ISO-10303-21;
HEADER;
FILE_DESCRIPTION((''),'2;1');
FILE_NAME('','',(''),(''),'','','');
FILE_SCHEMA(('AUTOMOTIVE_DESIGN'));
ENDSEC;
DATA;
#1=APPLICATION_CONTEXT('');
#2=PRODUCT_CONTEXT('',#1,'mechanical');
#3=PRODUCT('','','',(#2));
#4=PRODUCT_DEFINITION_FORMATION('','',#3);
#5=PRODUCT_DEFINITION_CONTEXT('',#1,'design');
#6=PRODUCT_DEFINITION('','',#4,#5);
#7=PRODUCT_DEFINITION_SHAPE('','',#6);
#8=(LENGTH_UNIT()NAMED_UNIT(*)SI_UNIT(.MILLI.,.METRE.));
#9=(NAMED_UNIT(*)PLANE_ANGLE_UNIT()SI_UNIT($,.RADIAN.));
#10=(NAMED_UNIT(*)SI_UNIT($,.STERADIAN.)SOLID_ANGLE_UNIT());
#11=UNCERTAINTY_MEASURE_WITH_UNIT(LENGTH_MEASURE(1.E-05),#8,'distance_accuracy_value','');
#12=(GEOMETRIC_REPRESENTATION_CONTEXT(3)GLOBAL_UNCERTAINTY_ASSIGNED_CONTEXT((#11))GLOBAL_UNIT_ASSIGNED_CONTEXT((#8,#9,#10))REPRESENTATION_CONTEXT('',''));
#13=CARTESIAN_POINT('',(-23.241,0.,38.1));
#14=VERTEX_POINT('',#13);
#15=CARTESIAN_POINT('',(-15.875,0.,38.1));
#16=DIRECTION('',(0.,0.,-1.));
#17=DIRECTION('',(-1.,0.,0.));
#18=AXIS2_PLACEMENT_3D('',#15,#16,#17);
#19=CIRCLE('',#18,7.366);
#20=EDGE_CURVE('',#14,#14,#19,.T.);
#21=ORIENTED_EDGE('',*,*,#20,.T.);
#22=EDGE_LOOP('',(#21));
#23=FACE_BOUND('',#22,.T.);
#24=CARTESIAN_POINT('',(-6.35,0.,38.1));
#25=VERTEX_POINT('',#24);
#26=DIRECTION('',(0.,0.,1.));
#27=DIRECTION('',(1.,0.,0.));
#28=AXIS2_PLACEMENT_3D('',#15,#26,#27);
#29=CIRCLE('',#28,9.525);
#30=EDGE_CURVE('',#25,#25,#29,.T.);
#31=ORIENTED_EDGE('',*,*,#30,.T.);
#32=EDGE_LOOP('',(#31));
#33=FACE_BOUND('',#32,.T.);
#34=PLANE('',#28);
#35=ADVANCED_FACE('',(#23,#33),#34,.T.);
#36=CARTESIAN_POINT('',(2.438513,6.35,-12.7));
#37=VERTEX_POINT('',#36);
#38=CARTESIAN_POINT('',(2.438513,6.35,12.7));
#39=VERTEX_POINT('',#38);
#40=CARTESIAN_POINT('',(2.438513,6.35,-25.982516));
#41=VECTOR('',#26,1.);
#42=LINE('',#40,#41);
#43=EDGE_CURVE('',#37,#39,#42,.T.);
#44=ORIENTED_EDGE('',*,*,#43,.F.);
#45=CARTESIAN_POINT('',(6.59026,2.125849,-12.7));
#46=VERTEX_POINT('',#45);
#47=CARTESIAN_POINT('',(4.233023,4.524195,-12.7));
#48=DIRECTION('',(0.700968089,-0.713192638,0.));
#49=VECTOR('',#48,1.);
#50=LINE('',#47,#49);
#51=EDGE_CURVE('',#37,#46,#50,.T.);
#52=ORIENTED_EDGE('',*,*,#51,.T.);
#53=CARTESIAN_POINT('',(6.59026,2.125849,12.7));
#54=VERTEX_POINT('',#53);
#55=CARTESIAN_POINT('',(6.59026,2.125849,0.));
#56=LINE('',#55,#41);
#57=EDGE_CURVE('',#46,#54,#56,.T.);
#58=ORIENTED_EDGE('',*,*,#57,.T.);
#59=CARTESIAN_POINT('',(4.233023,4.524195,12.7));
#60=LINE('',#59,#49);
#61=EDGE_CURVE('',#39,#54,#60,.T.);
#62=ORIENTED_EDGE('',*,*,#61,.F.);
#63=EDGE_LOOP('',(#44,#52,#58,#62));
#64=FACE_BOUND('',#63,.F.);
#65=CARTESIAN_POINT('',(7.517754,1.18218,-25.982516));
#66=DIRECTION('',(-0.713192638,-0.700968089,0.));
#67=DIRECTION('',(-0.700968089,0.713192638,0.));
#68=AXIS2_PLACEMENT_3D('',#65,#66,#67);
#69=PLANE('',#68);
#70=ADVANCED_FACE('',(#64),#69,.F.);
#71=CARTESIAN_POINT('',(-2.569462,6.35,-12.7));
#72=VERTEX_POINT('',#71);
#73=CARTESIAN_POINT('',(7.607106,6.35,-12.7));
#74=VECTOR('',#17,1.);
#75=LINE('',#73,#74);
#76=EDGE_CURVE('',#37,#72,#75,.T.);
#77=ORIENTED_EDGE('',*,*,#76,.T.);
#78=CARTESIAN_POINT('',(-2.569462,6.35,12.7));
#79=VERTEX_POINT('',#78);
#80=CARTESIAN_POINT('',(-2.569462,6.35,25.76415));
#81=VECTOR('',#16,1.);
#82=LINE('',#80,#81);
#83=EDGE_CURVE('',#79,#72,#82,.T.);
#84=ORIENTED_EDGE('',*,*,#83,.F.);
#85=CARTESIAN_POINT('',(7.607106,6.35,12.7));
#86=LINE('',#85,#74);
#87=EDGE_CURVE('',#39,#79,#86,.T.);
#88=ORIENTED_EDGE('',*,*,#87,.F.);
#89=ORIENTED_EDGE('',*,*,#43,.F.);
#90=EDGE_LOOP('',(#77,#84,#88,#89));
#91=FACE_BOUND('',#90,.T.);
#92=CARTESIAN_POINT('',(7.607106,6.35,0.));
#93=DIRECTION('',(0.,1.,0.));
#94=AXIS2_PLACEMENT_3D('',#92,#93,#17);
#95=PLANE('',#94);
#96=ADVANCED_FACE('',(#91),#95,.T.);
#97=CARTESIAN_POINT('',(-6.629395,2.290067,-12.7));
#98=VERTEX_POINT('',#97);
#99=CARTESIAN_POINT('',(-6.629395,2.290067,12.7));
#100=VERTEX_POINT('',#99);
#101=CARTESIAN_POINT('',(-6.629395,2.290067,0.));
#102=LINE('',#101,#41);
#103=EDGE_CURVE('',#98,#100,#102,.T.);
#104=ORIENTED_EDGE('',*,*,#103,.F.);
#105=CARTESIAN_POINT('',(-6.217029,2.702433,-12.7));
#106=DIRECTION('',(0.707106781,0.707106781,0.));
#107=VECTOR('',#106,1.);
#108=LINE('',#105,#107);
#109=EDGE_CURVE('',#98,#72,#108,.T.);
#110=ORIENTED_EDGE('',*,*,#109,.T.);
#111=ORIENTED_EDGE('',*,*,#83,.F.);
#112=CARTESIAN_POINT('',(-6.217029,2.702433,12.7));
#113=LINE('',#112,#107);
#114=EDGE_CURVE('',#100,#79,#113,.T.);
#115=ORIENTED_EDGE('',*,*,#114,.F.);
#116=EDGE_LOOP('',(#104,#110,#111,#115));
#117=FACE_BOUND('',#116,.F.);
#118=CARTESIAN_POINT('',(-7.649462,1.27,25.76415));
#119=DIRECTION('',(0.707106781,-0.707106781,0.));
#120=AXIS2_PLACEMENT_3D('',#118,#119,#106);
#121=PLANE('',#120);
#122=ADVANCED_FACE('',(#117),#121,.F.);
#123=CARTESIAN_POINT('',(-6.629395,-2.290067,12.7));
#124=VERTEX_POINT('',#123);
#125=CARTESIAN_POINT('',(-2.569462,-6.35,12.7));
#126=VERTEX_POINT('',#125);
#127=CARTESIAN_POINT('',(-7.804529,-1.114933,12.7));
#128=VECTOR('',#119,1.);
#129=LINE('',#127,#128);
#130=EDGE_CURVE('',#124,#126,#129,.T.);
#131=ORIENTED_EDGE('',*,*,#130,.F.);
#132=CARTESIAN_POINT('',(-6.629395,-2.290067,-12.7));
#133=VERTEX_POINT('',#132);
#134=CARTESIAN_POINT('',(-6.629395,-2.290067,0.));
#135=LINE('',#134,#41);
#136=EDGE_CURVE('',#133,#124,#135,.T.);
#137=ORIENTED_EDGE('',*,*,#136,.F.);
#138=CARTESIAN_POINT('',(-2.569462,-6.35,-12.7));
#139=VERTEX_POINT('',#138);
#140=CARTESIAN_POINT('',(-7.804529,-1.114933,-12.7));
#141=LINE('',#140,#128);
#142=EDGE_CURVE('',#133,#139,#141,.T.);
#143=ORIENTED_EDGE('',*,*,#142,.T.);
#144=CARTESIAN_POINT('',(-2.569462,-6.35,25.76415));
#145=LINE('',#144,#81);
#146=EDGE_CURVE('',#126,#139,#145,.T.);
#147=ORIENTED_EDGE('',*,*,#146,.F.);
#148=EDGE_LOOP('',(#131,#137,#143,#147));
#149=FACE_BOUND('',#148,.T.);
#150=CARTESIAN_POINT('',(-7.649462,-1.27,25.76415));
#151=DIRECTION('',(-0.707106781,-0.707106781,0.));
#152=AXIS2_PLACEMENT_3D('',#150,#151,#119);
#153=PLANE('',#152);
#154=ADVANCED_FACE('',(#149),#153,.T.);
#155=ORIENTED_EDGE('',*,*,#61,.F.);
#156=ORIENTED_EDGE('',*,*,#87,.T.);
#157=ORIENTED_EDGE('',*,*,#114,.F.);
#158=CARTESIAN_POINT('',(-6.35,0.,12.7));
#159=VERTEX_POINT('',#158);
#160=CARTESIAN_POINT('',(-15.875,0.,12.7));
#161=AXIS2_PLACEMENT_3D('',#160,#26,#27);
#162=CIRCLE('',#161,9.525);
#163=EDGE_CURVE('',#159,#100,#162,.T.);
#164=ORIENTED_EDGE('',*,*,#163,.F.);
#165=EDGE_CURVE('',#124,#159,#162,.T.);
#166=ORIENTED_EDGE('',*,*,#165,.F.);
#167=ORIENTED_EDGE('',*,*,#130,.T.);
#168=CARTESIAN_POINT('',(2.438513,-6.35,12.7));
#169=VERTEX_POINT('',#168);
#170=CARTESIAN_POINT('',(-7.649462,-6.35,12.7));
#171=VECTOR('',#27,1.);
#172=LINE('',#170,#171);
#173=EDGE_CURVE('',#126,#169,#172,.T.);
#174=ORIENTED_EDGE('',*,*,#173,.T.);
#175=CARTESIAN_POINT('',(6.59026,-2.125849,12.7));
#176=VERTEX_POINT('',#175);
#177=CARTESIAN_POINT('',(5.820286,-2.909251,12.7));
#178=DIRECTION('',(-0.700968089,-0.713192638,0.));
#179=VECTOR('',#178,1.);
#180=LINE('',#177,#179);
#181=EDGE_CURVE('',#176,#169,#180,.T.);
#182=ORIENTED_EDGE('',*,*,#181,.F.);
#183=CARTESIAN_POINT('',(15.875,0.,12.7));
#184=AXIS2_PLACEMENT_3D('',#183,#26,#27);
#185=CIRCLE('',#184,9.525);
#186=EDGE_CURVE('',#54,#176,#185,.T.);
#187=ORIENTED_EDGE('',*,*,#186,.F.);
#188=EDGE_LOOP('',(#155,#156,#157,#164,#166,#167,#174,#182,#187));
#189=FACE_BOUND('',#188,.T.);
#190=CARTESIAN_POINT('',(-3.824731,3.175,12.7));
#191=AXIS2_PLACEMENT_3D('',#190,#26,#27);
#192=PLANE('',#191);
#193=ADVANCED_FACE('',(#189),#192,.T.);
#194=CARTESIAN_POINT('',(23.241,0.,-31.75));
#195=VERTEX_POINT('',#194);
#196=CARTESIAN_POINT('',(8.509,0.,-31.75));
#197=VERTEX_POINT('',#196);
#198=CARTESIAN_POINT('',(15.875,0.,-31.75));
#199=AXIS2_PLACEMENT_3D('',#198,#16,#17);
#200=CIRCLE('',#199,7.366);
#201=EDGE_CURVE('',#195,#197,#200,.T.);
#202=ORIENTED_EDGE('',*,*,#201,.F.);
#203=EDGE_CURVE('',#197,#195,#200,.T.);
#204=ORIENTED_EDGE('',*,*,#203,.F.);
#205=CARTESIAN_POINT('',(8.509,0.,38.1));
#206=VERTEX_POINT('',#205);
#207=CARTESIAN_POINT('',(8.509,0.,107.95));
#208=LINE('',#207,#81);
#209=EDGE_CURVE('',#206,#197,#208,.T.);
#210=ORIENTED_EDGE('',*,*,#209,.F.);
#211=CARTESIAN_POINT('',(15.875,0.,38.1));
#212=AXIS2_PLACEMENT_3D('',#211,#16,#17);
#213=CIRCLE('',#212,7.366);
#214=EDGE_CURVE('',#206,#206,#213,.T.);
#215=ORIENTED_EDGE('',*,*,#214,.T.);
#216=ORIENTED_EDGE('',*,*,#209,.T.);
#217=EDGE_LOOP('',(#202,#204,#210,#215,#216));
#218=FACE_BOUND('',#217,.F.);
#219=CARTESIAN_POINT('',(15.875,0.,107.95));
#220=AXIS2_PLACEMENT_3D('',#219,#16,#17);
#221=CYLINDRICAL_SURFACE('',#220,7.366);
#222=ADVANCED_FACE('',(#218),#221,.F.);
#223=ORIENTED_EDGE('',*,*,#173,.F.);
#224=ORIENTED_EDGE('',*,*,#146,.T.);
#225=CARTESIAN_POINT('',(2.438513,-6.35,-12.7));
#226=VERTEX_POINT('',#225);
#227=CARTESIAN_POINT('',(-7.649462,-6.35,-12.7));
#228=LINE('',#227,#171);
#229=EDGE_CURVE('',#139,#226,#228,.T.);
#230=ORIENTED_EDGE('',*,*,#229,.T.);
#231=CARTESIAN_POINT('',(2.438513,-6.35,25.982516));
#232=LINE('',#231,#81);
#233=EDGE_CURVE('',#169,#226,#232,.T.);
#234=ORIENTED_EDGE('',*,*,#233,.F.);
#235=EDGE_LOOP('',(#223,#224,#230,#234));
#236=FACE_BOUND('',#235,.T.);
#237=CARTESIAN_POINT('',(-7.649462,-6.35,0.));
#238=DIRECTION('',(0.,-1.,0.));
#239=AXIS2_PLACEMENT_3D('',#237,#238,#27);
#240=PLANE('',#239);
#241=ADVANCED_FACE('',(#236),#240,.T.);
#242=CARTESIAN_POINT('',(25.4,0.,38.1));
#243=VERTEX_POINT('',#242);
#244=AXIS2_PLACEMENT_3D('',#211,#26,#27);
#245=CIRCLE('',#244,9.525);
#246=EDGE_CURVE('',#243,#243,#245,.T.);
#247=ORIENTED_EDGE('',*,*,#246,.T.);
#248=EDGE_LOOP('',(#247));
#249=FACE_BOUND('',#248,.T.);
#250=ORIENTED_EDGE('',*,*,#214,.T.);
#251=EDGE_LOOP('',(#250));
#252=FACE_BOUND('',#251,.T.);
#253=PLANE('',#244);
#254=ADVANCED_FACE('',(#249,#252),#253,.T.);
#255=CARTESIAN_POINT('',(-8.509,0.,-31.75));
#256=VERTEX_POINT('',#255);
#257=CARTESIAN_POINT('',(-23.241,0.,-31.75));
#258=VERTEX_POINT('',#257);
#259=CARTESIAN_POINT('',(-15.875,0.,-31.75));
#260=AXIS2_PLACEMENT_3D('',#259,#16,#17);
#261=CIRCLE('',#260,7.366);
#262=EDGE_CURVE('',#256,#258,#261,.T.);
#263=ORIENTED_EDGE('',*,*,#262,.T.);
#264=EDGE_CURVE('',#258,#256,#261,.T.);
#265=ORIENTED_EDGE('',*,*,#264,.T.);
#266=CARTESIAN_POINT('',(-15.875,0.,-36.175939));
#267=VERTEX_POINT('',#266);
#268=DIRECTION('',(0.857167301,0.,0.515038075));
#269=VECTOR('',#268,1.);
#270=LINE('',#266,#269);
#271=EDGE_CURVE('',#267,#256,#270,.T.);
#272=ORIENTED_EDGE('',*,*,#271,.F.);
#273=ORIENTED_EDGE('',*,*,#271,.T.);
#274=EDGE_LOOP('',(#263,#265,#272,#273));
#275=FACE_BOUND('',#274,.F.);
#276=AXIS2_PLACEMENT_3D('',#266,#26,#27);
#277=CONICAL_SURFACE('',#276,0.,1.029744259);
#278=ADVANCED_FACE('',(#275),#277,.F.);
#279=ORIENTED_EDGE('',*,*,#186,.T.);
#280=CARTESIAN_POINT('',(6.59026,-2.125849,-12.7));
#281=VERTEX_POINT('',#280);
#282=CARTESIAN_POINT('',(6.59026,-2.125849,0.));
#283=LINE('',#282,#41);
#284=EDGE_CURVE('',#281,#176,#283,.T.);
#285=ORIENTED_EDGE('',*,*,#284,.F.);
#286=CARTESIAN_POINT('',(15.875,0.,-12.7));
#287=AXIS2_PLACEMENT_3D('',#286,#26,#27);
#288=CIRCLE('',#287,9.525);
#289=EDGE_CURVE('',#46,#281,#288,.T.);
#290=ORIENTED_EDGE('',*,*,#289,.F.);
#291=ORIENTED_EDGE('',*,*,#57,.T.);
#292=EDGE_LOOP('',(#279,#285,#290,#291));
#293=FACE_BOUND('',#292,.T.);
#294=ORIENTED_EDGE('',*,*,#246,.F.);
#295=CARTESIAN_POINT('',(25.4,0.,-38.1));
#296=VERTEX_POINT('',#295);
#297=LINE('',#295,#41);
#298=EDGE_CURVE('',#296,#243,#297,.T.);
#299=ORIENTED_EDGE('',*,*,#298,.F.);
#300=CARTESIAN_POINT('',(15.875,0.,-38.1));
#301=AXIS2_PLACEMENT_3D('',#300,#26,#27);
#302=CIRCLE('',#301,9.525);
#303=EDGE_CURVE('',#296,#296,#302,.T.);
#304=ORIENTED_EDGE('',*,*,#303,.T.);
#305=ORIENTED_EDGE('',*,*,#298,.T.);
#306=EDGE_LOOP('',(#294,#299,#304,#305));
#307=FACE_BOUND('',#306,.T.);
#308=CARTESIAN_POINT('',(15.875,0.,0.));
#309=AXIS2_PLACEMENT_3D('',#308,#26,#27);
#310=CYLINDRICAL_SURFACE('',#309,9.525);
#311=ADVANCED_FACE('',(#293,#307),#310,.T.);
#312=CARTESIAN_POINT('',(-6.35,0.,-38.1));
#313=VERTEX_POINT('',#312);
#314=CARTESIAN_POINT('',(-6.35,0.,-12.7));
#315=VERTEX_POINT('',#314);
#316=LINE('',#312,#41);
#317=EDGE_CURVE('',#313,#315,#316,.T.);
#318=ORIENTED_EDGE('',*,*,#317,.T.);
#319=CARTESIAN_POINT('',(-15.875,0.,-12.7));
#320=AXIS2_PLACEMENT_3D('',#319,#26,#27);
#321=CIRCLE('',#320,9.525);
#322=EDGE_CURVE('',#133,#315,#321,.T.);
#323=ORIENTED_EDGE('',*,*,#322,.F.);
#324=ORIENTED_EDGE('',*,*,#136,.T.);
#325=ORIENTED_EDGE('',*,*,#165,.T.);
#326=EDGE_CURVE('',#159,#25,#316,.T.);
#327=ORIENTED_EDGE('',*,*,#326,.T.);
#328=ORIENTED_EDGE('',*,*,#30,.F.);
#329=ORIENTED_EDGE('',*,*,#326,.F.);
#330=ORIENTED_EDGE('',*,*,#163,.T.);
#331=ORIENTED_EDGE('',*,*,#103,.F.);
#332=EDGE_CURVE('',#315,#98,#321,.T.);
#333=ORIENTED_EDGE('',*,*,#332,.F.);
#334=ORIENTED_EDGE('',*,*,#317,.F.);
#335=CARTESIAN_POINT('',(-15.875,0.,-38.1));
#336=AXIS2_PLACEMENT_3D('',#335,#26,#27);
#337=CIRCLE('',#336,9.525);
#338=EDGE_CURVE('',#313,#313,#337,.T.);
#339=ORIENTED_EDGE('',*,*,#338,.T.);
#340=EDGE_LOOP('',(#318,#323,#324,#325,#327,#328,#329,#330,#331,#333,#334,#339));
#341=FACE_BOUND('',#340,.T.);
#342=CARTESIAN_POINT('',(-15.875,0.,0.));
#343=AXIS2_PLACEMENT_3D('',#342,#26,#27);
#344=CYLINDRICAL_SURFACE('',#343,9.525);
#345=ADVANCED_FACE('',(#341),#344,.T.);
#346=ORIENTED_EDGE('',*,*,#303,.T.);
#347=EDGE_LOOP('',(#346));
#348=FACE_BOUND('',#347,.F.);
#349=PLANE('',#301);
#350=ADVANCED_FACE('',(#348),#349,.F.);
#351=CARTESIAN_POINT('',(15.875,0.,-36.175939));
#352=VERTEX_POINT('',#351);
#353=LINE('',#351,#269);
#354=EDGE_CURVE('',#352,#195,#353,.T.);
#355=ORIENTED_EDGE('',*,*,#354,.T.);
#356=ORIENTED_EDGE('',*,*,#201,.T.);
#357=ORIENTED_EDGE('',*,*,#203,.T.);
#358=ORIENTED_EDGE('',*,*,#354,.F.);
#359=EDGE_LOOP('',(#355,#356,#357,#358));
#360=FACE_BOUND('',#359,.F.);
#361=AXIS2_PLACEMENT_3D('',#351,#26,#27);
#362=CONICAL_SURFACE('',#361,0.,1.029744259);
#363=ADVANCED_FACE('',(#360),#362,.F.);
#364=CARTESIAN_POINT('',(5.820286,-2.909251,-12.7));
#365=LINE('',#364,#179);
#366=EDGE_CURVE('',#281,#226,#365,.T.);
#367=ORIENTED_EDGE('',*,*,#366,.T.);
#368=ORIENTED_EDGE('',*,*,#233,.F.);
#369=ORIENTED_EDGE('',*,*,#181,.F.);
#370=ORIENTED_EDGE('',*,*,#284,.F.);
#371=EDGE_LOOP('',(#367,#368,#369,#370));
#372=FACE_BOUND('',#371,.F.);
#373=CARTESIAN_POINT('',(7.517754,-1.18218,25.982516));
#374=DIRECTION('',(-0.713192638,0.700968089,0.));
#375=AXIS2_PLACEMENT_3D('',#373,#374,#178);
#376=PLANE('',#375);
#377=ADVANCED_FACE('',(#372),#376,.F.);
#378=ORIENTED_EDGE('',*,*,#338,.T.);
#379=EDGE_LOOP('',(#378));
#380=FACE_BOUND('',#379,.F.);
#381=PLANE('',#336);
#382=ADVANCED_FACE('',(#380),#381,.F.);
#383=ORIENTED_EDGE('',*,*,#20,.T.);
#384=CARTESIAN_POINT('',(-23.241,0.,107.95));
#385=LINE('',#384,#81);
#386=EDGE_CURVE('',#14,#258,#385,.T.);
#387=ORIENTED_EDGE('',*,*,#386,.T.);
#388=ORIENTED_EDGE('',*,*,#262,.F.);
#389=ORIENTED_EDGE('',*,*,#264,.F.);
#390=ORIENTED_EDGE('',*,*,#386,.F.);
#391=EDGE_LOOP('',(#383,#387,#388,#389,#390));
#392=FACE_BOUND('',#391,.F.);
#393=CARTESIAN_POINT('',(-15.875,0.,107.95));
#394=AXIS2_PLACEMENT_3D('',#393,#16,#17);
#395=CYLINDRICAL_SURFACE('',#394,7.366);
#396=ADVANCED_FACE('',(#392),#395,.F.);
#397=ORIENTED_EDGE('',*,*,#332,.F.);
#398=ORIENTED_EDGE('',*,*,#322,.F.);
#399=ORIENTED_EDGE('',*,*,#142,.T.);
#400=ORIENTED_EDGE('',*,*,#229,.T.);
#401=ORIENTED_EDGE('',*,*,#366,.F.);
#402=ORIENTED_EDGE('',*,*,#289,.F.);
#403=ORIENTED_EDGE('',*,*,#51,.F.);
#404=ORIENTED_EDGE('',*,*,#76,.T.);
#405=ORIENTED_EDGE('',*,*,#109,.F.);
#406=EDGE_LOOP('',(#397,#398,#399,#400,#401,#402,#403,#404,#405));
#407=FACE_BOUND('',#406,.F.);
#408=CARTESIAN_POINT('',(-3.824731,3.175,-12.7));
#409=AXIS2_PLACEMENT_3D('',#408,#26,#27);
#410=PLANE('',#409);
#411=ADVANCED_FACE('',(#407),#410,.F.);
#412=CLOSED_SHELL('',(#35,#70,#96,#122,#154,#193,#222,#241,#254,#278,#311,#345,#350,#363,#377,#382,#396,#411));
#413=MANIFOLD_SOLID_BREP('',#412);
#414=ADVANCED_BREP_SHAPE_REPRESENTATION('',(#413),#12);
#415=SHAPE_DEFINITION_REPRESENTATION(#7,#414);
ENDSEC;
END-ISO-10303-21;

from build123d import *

# Parameters (mm, degrees)
F0_R           = 9.525
F1_DEPTH       = 38.1
F4_W           = 7.6494621422
F4_H           = 6.35
F5_DEPTH       = 12.7
F8_D           = 14.732
F8_DEPTH       = 69.85
F8_TIP         = 4.4259393198
F8_ON_F7_D     = 14.732
F8_ON_F7_DEPTH = 69.85
F8_ON_F7_TIP   = 4.4259393198
F9_T4_DEPTH    = 51.5282991577
F9_S5_R        = 9.525
F9_T6_DEPTH    = 28
F9_T10_DEPTH   = 51.965031671
F9_S11_R       = 9.525
F9_T12_DEPTH   = 28
F9_T16_DEPTH   = 51.965031671
F9_S17_R       = 9.525
F9_T18_DEPTH   = 28
F9_T22_DEPTH   = 51.5282991577
F9_S23_R       = 9.525
F9_T24_DEPTH   = 28


# Not quite as in the source:
# - a fillet or chamfer that OpenCascade refuses, or shapes differently, is made with other operations: its cross-section is extruded or revolved along the edge and cut away or added
# - a feature of the source that left no trace in its solid (it failed there, or was rolled back) is left out


with BuildPart() as f1:
    # F0 (on Top) → F1 (new body, symmetric)
    with BuildSketch(Plane.XY):
        with Locations((-15.875, 0)):
            Circle(F0_R)
    extrude(amount=F1_DEPTH, both=True)



with BuildPart() as f1b:
    # F0 (on Top) → F1, piece 2 (new body, symmetric)
    with BuildSketch(Plane.XY):
        with Locations((15.875, 0)):
            Circle(F0_R)
    extrude(amount=F1_DEPTH, both=True)


with BuildPart() as f1_1:
    add(f1.part)

    add(f1b.part)  # F5 merges F1b
    # F4 (on Top) → F5 (join, symmetric)
    with BuildSketch(Plane.XY):
        with Locations((-3.8247310711, 3.175)):
            Rectangle(F4_W, F4_H)
        Polygon((7.4973143637, 0), (0, 0), (0, -6.35), (7.6071062533, -6.35), align=None)
        Polygon((0, 6.35), (0, 0), (7.4973143637, 0), (7.6071062533, 6.35), align=None)
        with Locations((-3.8247310711, -3.175)):
            Rectangle(F4_W, F4_H)
    extrude(amount=F5_DEPTH, both=True)

    # F8
    with Locations(Plane.XY.offset(38.1)):
        with Locations((-15.875, 0)):
            Hole(F8_D / 2, depth=F8_DEPTH)
            with Locations((0, 0, -(F8_DEPTH + F8_TIP / 2))):  # 118° drill point
                Cone(0, F8_D / 2, F8_TIP, mode=Mode.SUBTRACT)

    # F8 on F7
    with Locations(Plane.XY.offset(38.1)):
        with Locations((15.875, 0)):
            Hole(F8_ON_F7_D / 2, depth=F8_ON_F7_DEPTH)
            with Locations((0, 0, -(F8_ON_F7_DEPTH + F8_ON_F7_TIP / 2))):  # 118° drill point
                Cone(0, F8_ON_F7_D / 2, F8_ON_F7_TIP, mode=Mode.SUBTRACT)

    # F9: chamfer of 5.08 on 4 edges, made by hand


with BuildPart() as f9_tool2:
    # F9_s3 → F9_t4 (new body)
    with BuildSketch(Plane.XY.offset(25.7641495789)):
        Polygon((-7.6494621422, -1.27), (-2.5694621422, -6.35), (-7.6494621422, -6.35), align=None)
    extrude(amount=-F9_T4_DEPTH)

    # F9_s5 → F9_t6 (cut, symmetric)
    with BuildSketch(Plane.XY):
        with Locations((-15.875, 0)):
            Circle(F9_S5_R)
    extrude(amount=F9_T6_DEPTH, both=True, mode=Mode.SUBTRACT)


with BuildPart() as f1_2:
    add(f1_1.part)

    # F9_t1: cut F9_tool2
    add(f9_tool2.part, mode=Mode.SUBTRACT)


with BuildPart() as f9_tool8:
    # F9_s9 → F9_t10 (new body)
    with BuildSketch(Plane.XY.offset(25.9825158355)):
        Polygon((7.5177543218, -1.1821796141), (2.438513475, -6.35), (7.6071062533, -6.35), align=None)
    extrude(amount=-F9_T10_DEPTH)

    # F9_s11 → F9_t12 (cut, symmetric)
    with BuildSketch(Plane.XY):
        with Locations((15.875, 0)):
            Circle(F9_S11_R)
    extrude(amount=F9_T12_DEPTH, both=True, mode=Mode.SUBTRACT)


with BuildPart() as f1_3:
    add(f1_2.part)

    # F9_t7: cut F9_tool8
    add(f9_tool8.part, mode=Mode.SUBTRACT)


with BuildPart() as f9_tool14:
    # F9_s15 → F9_t16 (new body)
    with BuildSketch(Plane.XY.offset(-25.9825158355)):
        Polygon((7.5177543218, 1.1821796141), (2.438513475, 6.35), (7.6071062533, 6.35), align=None)
    extrude(amount=F9_T16_DEPTH)

    # F9_s17 → F9_t18 (cut, symmetric)
    with BuildSketch(Plane.XY):
        with Locations((15.875, 0)):
            Circle(F9_S17_R)
    extrude(amount=F9_T18_DEPTH, both=True, mode=Mode.SUBTRACT)


with BuildPart() as f1_4:
    add(f1_3.part)

    # F9_t13: cut F9_tool14
    add(f9_tool14.part, mode=Mode.SUBTRACT)


with BuildPart() as f9_tool20:
    # F9_s21 → F9_t22 (new body)
    with BuildSketch(Plane.XY.offset(25.7641495789)):
        Polygon((-7.6494621422, 1.27), (-2.5694621422, 6.35), (-7.6494621422, 6.35), align=None)
    extrude(amount=-F9_T22_DEPTH)

    # F9_s23 → F9_t24 (cut, symmetric)
    with BuildSketch(Plane.XY):
        with Locations((-15.875, 0)):
            Circle(F9_S23_R)
    extrude(amount=F9_T24_DEPTH, both=True, mode=Mode.SUBTRACT)


with BuildPart() as f1_5:
    add(f1_4.part)

    # F9_t19: cut F9_tool20
    add(f9_tool20.part, mode=Mode.SUBTRACT)


solid = f1_5.part
